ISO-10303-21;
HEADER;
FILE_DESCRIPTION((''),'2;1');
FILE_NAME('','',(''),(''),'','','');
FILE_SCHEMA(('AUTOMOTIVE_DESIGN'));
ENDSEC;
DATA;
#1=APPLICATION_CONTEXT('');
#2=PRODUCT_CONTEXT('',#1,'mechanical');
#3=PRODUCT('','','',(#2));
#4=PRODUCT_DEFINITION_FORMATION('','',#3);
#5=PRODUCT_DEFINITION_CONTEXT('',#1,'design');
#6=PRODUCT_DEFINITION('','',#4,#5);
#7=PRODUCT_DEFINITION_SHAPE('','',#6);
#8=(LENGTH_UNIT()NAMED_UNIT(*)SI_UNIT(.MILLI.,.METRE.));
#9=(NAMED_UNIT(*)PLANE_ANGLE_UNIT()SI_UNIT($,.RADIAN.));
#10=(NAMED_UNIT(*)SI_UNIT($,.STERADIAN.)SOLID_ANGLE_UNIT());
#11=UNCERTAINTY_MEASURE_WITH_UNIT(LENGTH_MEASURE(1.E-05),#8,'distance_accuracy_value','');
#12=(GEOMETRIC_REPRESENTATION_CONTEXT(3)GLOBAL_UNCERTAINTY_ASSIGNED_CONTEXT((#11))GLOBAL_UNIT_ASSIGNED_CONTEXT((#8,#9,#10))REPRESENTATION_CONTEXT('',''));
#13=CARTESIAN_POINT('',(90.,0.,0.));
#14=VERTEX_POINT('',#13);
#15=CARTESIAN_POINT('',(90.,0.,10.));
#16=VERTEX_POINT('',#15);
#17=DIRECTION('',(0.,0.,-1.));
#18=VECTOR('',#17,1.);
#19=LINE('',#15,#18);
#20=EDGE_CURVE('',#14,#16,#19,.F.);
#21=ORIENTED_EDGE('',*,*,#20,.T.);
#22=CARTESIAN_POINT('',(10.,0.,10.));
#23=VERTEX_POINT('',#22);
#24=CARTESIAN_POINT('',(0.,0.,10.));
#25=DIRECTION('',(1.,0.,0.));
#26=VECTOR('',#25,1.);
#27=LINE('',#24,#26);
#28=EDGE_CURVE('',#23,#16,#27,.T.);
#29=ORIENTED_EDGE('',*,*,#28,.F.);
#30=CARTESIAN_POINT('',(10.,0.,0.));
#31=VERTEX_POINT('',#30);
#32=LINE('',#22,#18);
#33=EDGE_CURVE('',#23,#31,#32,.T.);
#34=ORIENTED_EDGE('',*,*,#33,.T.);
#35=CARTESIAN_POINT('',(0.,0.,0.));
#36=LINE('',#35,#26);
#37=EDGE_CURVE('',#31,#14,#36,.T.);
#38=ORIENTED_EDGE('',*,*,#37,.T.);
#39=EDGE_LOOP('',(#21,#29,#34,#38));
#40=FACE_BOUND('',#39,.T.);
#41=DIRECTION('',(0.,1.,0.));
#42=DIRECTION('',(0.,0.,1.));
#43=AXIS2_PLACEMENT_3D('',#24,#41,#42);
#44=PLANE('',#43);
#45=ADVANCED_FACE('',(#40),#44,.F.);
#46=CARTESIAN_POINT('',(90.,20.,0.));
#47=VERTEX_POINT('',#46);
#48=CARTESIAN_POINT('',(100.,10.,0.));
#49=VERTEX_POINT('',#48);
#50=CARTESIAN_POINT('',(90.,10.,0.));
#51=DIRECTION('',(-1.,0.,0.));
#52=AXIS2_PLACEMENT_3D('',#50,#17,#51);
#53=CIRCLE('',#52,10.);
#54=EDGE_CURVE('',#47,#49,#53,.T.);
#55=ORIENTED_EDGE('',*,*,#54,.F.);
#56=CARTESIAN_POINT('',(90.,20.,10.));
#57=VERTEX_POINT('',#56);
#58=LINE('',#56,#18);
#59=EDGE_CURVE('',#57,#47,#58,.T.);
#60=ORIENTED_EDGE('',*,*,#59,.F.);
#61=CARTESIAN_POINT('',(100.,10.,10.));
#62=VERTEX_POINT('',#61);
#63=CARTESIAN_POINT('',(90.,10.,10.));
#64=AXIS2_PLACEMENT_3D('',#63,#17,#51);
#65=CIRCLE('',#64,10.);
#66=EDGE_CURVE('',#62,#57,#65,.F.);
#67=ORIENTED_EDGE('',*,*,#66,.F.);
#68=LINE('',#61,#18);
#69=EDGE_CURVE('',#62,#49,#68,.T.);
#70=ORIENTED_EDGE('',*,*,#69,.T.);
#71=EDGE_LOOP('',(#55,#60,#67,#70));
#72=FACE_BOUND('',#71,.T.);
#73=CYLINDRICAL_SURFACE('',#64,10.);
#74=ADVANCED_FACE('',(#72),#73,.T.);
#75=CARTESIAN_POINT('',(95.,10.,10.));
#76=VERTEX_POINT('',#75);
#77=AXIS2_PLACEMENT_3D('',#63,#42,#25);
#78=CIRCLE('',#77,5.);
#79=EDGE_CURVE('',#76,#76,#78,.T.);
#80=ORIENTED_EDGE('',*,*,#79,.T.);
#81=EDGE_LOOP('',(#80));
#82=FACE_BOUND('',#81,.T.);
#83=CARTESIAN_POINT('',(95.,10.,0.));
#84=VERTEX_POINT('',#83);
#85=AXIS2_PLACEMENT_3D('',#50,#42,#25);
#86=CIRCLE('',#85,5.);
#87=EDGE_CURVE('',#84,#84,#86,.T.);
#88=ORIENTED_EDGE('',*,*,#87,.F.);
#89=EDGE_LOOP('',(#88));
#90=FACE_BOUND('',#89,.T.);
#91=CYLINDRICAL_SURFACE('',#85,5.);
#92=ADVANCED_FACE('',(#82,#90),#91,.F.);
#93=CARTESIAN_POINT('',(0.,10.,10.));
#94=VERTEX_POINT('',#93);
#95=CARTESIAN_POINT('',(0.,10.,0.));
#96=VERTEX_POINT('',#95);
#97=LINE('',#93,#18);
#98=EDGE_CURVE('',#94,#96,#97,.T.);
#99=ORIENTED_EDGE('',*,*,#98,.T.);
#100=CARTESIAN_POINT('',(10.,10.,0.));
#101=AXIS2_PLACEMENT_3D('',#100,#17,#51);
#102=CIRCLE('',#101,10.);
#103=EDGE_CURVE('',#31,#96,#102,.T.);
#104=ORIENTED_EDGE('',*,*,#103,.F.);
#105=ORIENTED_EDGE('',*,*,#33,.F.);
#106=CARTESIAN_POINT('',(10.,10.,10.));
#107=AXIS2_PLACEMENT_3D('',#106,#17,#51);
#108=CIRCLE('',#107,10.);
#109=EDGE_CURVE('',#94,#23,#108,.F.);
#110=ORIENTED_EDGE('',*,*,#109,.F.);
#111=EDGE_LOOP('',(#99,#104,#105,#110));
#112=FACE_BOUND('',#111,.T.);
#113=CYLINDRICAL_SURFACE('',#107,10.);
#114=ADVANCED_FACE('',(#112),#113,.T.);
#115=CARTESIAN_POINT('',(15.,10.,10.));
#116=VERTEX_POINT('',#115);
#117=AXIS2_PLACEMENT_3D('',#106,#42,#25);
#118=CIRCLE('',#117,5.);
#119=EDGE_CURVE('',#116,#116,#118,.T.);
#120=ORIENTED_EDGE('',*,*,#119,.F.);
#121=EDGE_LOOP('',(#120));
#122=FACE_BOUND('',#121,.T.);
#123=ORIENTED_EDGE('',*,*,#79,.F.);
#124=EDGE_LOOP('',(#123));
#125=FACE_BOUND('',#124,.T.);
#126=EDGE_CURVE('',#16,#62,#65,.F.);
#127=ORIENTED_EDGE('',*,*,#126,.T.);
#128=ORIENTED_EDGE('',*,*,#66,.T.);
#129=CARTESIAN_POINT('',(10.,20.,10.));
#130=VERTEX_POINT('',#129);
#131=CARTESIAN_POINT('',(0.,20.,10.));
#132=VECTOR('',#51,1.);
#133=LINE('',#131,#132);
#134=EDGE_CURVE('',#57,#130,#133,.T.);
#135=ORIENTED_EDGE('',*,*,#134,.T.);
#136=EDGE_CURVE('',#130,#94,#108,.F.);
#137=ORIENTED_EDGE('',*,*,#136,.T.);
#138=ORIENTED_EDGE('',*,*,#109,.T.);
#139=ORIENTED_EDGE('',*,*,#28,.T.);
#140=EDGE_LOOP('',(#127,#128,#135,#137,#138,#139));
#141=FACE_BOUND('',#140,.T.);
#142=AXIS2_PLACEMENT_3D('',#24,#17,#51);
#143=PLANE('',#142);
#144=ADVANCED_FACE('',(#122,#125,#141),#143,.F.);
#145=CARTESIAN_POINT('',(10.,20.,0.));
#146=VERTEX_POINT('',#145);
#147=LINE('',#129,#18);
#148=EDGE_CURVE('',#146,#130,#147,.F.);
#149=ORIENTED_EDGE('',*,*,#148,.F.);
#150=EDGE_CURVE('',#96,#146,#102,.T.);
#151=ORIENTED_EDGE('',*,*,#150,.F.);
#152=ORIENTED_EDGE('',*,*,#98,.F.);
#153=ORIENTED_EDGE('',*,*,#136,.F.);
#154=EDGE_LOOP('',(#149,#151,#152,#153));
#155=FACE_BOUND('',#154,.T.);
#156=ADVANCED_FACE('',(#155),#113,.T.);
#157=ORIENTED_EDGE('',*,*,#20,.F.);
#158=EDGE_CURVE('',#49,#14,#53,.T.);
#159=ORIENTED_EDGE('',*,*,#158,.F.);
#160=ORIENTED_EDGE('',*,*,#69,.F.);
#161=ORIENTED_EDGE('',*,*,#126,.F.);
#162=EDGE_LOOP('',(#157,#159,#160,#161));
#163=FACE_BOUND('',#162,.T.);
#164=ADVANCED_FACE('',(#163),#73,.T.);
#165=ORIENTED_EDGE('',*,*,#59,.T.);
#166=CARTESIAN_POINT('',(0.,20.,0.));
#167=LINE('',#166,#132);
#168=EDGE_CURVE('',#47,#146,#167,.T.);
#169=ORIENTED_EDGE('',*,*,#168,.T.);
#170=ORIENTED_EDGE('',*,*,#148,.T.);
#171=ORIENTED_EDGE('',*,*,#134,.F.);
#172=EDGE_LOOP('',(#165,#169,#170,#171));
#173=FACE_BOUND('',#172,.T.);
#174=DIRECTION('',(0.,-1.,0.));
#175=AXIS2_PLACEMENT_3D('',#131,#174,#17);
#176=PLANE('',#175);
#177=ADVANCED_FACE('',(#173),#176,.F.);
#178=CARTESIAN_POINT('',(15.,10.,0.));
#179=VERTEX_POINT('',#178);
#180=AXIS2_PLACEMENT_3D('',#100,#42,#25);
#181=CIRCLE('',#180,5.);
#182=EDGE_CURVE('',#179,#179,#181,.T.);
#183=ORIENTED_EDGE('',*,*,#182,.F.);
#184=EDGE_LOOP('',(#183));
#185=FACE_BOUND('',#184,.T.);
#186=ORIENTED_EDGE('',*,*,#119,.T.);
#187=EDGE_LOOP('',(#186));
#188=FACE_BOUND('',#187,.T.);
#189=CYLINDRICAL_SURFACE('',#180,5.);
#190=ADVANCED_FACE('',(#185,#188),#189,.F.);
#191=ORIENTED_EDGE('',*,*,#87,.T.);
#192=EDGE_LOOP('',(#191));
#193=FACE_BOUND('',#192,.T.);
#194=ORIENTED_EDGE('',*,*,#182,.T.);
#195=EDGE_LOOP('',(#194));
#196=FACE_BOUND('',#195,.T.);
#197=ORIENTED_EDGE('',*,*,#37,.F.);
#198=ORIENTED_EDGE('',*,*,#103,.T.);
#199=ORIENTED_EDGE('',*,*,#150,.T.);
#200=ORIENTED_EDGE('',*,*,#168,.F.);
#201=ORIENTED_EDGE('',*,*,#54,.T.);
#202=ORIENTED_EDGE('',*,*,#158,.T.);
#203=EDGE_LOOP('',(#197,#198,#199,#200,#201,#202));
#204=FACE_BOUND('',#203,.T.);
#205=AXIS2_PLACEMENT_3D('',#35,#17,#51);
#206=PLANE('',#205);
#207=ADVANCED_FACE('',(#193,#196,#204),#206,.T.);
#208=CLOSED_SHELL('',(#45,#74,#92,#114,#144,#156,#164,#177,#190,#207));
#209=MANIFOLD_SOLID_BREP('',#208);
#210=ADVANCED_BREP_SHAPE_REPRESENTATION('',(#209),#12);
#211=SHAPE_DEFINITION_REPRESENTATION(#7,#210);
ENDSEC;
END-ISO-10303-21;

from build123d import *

# Parameters (mm, degrees)
SKETCH1_W           = 100
SKETCH1_H           = 20
BOSS_EXTRUDE1_DEPTH = 10
FILLET1_R           = 10
SKETCH5_R           = 5
CUT_EXTRUDE1_DEPTH  = 103.46950766


with BuildPart() as part:
    # Sketch1 → Boss-Extrude1 (new body)
    with BuildSketch(Plane.XY):
        with Locations((50, 10)):
            Rectangle(SKETCH1_W, SKETCH1_H)
    extrude(amount=BOSS_EXTRUDE1_DEPTH)

    # Fillet1
    fillet1_edges = [part.edges().sort_by_distance(p)[0] for p in [
        (100, 20, 5),
        (100, 0, 5),
        (0, 0, 5),
        (0, 20, 5),
    ]]
    fillet(fillet1_edges, radius=FILLET1_R - 0.0001)  # a hair under: the kernel refuses the full size

    # Sketch5 → Cut-Extrude1 (cut, through all)
    with BuildSketch(Plane.XY.offset(10)):
        with Locations((10, 10)):
            Circle(SKETCH5_R)
        with Locations((90, 10)):
            Circle(SKETCH5_R)
    extrude(amount=-CUT_EXTRUDE1_DEPTH, mode=Mode.SUBTRACT)


solid = part.part
